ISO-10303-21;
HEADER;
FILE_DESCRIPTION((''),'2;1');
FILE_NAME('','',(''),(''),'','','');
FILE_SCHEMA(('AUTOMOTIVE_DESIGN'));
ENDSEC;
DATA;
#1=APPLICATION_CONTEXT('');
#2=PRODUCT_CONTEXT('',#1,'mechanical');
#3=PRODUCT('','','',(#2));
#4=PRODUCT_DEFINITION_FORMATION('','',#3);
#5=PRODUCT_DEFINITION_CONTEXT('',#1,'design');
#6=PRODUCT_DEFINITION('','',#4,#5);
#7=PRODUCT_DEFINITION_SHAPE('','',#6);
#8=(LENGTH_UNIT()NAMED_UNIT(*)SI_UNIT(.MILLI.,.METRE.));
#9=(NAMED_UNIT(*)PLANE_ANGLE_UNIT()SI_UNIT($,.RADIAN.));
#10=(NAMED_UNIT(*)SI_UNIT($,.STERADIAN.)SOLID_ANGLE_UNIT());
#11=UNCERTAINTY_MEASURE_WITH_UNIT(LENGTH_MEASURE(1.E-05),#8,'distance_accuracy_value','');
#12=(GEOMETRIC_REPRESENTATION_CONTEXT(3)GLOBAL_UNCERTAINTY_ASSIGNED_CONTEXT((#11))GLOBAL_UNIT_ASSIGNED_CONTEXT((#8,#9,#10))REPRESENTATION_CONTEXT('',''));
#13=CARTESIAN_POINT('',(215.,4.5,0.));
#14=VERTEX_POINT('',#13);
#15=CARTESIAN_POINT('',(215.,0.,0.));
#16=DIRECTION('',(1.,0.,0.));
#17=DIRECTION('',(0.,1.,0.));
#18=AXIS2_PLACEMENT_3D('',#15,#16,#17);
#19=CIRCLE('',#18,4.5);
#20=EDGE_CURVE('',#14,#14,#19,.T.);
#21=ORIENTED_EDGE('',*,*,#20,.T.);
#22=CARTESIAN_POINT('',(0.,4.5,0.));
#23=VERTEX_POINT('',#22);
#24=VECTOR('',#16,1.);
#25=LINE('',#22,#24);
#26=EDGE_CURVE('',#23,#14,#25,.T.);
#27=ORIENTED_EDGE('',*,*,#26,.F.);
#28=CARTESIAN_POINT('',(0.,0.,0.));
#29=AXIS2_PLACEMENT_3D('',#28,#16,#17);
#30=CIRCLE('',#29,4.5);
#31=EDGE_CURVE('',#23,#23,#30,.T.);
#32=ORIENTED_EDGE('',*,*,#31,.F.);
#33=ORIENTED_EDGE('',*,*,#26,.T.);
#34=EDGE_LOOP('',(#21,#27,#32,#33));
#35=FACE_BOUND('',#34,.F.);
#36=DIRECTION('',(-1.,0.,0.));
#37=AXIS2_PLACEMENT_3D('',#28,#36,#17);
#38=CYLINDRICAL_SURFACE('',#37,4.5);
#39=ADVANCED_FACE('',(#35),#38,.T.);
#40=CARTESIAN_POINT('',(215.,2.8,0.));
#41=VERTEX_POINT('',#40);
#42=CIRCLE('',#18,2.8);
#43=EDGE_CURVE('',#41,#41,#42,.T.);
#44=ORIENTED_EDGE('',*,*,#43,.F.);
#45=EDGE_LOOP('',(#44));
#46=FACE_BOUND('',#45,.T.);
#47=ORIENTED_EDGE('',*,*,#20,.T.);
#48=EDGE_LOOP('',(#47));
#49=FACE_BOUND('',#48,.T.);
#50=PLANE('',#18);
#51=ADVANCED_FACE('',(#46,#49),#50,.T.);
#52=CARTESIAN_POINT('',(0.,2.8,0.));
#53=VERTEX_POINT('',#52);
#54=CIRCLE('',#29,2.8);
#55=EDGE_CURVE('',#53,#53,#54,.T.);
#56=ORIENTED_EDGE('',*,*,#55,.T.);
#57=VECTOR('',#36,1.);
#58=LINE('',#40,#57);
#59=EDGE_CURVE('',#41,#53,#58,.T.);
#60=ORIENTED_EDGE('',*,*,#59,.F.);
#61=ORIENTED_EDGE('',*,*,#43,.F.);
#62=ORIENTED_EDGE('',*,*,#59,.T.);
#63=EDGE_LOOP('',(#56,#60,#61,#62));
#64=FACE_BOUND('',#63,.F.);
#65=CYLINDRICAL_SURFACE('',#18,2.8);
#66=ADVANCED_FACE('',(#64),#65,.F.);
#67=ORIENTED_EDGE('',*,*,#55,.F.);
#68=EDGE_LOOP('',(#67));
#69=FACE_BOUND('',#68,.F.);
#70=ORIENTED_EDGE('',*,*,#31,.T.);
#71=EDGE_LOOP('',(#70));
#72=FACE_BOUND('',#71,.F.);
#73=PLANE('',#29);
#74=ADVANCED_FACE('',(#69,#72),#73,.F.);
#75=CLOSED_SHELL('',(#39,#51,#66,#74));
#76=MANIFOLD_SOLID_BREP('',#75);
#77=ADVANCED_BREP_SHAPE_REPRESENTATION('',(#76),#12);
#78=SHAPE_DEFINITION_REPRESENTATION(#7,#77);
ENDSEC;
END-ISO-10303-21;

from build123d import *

# Parameters (mm, degrees)
F0_R     = 4.5
F1_DEPTH = 215
F2_R     = 2.8
F3_DEPTH = 215


with BuildPart() as f1:
    # F0 (on Right) → F1 (new body)
    with BuildSketch(Plane.YZ):
        Circle(F0_R)
    extrude(amount=F1_DEPTH)

    # F2 (on face) → F3 (cut, through all)
    with BuildSketch(Plane.YZ.offset(215)):
        Circle(F2_R)
    extrude(amount=-F3_DEPTH, mode=Mode.SUBTRACT)


solid = f1.part
